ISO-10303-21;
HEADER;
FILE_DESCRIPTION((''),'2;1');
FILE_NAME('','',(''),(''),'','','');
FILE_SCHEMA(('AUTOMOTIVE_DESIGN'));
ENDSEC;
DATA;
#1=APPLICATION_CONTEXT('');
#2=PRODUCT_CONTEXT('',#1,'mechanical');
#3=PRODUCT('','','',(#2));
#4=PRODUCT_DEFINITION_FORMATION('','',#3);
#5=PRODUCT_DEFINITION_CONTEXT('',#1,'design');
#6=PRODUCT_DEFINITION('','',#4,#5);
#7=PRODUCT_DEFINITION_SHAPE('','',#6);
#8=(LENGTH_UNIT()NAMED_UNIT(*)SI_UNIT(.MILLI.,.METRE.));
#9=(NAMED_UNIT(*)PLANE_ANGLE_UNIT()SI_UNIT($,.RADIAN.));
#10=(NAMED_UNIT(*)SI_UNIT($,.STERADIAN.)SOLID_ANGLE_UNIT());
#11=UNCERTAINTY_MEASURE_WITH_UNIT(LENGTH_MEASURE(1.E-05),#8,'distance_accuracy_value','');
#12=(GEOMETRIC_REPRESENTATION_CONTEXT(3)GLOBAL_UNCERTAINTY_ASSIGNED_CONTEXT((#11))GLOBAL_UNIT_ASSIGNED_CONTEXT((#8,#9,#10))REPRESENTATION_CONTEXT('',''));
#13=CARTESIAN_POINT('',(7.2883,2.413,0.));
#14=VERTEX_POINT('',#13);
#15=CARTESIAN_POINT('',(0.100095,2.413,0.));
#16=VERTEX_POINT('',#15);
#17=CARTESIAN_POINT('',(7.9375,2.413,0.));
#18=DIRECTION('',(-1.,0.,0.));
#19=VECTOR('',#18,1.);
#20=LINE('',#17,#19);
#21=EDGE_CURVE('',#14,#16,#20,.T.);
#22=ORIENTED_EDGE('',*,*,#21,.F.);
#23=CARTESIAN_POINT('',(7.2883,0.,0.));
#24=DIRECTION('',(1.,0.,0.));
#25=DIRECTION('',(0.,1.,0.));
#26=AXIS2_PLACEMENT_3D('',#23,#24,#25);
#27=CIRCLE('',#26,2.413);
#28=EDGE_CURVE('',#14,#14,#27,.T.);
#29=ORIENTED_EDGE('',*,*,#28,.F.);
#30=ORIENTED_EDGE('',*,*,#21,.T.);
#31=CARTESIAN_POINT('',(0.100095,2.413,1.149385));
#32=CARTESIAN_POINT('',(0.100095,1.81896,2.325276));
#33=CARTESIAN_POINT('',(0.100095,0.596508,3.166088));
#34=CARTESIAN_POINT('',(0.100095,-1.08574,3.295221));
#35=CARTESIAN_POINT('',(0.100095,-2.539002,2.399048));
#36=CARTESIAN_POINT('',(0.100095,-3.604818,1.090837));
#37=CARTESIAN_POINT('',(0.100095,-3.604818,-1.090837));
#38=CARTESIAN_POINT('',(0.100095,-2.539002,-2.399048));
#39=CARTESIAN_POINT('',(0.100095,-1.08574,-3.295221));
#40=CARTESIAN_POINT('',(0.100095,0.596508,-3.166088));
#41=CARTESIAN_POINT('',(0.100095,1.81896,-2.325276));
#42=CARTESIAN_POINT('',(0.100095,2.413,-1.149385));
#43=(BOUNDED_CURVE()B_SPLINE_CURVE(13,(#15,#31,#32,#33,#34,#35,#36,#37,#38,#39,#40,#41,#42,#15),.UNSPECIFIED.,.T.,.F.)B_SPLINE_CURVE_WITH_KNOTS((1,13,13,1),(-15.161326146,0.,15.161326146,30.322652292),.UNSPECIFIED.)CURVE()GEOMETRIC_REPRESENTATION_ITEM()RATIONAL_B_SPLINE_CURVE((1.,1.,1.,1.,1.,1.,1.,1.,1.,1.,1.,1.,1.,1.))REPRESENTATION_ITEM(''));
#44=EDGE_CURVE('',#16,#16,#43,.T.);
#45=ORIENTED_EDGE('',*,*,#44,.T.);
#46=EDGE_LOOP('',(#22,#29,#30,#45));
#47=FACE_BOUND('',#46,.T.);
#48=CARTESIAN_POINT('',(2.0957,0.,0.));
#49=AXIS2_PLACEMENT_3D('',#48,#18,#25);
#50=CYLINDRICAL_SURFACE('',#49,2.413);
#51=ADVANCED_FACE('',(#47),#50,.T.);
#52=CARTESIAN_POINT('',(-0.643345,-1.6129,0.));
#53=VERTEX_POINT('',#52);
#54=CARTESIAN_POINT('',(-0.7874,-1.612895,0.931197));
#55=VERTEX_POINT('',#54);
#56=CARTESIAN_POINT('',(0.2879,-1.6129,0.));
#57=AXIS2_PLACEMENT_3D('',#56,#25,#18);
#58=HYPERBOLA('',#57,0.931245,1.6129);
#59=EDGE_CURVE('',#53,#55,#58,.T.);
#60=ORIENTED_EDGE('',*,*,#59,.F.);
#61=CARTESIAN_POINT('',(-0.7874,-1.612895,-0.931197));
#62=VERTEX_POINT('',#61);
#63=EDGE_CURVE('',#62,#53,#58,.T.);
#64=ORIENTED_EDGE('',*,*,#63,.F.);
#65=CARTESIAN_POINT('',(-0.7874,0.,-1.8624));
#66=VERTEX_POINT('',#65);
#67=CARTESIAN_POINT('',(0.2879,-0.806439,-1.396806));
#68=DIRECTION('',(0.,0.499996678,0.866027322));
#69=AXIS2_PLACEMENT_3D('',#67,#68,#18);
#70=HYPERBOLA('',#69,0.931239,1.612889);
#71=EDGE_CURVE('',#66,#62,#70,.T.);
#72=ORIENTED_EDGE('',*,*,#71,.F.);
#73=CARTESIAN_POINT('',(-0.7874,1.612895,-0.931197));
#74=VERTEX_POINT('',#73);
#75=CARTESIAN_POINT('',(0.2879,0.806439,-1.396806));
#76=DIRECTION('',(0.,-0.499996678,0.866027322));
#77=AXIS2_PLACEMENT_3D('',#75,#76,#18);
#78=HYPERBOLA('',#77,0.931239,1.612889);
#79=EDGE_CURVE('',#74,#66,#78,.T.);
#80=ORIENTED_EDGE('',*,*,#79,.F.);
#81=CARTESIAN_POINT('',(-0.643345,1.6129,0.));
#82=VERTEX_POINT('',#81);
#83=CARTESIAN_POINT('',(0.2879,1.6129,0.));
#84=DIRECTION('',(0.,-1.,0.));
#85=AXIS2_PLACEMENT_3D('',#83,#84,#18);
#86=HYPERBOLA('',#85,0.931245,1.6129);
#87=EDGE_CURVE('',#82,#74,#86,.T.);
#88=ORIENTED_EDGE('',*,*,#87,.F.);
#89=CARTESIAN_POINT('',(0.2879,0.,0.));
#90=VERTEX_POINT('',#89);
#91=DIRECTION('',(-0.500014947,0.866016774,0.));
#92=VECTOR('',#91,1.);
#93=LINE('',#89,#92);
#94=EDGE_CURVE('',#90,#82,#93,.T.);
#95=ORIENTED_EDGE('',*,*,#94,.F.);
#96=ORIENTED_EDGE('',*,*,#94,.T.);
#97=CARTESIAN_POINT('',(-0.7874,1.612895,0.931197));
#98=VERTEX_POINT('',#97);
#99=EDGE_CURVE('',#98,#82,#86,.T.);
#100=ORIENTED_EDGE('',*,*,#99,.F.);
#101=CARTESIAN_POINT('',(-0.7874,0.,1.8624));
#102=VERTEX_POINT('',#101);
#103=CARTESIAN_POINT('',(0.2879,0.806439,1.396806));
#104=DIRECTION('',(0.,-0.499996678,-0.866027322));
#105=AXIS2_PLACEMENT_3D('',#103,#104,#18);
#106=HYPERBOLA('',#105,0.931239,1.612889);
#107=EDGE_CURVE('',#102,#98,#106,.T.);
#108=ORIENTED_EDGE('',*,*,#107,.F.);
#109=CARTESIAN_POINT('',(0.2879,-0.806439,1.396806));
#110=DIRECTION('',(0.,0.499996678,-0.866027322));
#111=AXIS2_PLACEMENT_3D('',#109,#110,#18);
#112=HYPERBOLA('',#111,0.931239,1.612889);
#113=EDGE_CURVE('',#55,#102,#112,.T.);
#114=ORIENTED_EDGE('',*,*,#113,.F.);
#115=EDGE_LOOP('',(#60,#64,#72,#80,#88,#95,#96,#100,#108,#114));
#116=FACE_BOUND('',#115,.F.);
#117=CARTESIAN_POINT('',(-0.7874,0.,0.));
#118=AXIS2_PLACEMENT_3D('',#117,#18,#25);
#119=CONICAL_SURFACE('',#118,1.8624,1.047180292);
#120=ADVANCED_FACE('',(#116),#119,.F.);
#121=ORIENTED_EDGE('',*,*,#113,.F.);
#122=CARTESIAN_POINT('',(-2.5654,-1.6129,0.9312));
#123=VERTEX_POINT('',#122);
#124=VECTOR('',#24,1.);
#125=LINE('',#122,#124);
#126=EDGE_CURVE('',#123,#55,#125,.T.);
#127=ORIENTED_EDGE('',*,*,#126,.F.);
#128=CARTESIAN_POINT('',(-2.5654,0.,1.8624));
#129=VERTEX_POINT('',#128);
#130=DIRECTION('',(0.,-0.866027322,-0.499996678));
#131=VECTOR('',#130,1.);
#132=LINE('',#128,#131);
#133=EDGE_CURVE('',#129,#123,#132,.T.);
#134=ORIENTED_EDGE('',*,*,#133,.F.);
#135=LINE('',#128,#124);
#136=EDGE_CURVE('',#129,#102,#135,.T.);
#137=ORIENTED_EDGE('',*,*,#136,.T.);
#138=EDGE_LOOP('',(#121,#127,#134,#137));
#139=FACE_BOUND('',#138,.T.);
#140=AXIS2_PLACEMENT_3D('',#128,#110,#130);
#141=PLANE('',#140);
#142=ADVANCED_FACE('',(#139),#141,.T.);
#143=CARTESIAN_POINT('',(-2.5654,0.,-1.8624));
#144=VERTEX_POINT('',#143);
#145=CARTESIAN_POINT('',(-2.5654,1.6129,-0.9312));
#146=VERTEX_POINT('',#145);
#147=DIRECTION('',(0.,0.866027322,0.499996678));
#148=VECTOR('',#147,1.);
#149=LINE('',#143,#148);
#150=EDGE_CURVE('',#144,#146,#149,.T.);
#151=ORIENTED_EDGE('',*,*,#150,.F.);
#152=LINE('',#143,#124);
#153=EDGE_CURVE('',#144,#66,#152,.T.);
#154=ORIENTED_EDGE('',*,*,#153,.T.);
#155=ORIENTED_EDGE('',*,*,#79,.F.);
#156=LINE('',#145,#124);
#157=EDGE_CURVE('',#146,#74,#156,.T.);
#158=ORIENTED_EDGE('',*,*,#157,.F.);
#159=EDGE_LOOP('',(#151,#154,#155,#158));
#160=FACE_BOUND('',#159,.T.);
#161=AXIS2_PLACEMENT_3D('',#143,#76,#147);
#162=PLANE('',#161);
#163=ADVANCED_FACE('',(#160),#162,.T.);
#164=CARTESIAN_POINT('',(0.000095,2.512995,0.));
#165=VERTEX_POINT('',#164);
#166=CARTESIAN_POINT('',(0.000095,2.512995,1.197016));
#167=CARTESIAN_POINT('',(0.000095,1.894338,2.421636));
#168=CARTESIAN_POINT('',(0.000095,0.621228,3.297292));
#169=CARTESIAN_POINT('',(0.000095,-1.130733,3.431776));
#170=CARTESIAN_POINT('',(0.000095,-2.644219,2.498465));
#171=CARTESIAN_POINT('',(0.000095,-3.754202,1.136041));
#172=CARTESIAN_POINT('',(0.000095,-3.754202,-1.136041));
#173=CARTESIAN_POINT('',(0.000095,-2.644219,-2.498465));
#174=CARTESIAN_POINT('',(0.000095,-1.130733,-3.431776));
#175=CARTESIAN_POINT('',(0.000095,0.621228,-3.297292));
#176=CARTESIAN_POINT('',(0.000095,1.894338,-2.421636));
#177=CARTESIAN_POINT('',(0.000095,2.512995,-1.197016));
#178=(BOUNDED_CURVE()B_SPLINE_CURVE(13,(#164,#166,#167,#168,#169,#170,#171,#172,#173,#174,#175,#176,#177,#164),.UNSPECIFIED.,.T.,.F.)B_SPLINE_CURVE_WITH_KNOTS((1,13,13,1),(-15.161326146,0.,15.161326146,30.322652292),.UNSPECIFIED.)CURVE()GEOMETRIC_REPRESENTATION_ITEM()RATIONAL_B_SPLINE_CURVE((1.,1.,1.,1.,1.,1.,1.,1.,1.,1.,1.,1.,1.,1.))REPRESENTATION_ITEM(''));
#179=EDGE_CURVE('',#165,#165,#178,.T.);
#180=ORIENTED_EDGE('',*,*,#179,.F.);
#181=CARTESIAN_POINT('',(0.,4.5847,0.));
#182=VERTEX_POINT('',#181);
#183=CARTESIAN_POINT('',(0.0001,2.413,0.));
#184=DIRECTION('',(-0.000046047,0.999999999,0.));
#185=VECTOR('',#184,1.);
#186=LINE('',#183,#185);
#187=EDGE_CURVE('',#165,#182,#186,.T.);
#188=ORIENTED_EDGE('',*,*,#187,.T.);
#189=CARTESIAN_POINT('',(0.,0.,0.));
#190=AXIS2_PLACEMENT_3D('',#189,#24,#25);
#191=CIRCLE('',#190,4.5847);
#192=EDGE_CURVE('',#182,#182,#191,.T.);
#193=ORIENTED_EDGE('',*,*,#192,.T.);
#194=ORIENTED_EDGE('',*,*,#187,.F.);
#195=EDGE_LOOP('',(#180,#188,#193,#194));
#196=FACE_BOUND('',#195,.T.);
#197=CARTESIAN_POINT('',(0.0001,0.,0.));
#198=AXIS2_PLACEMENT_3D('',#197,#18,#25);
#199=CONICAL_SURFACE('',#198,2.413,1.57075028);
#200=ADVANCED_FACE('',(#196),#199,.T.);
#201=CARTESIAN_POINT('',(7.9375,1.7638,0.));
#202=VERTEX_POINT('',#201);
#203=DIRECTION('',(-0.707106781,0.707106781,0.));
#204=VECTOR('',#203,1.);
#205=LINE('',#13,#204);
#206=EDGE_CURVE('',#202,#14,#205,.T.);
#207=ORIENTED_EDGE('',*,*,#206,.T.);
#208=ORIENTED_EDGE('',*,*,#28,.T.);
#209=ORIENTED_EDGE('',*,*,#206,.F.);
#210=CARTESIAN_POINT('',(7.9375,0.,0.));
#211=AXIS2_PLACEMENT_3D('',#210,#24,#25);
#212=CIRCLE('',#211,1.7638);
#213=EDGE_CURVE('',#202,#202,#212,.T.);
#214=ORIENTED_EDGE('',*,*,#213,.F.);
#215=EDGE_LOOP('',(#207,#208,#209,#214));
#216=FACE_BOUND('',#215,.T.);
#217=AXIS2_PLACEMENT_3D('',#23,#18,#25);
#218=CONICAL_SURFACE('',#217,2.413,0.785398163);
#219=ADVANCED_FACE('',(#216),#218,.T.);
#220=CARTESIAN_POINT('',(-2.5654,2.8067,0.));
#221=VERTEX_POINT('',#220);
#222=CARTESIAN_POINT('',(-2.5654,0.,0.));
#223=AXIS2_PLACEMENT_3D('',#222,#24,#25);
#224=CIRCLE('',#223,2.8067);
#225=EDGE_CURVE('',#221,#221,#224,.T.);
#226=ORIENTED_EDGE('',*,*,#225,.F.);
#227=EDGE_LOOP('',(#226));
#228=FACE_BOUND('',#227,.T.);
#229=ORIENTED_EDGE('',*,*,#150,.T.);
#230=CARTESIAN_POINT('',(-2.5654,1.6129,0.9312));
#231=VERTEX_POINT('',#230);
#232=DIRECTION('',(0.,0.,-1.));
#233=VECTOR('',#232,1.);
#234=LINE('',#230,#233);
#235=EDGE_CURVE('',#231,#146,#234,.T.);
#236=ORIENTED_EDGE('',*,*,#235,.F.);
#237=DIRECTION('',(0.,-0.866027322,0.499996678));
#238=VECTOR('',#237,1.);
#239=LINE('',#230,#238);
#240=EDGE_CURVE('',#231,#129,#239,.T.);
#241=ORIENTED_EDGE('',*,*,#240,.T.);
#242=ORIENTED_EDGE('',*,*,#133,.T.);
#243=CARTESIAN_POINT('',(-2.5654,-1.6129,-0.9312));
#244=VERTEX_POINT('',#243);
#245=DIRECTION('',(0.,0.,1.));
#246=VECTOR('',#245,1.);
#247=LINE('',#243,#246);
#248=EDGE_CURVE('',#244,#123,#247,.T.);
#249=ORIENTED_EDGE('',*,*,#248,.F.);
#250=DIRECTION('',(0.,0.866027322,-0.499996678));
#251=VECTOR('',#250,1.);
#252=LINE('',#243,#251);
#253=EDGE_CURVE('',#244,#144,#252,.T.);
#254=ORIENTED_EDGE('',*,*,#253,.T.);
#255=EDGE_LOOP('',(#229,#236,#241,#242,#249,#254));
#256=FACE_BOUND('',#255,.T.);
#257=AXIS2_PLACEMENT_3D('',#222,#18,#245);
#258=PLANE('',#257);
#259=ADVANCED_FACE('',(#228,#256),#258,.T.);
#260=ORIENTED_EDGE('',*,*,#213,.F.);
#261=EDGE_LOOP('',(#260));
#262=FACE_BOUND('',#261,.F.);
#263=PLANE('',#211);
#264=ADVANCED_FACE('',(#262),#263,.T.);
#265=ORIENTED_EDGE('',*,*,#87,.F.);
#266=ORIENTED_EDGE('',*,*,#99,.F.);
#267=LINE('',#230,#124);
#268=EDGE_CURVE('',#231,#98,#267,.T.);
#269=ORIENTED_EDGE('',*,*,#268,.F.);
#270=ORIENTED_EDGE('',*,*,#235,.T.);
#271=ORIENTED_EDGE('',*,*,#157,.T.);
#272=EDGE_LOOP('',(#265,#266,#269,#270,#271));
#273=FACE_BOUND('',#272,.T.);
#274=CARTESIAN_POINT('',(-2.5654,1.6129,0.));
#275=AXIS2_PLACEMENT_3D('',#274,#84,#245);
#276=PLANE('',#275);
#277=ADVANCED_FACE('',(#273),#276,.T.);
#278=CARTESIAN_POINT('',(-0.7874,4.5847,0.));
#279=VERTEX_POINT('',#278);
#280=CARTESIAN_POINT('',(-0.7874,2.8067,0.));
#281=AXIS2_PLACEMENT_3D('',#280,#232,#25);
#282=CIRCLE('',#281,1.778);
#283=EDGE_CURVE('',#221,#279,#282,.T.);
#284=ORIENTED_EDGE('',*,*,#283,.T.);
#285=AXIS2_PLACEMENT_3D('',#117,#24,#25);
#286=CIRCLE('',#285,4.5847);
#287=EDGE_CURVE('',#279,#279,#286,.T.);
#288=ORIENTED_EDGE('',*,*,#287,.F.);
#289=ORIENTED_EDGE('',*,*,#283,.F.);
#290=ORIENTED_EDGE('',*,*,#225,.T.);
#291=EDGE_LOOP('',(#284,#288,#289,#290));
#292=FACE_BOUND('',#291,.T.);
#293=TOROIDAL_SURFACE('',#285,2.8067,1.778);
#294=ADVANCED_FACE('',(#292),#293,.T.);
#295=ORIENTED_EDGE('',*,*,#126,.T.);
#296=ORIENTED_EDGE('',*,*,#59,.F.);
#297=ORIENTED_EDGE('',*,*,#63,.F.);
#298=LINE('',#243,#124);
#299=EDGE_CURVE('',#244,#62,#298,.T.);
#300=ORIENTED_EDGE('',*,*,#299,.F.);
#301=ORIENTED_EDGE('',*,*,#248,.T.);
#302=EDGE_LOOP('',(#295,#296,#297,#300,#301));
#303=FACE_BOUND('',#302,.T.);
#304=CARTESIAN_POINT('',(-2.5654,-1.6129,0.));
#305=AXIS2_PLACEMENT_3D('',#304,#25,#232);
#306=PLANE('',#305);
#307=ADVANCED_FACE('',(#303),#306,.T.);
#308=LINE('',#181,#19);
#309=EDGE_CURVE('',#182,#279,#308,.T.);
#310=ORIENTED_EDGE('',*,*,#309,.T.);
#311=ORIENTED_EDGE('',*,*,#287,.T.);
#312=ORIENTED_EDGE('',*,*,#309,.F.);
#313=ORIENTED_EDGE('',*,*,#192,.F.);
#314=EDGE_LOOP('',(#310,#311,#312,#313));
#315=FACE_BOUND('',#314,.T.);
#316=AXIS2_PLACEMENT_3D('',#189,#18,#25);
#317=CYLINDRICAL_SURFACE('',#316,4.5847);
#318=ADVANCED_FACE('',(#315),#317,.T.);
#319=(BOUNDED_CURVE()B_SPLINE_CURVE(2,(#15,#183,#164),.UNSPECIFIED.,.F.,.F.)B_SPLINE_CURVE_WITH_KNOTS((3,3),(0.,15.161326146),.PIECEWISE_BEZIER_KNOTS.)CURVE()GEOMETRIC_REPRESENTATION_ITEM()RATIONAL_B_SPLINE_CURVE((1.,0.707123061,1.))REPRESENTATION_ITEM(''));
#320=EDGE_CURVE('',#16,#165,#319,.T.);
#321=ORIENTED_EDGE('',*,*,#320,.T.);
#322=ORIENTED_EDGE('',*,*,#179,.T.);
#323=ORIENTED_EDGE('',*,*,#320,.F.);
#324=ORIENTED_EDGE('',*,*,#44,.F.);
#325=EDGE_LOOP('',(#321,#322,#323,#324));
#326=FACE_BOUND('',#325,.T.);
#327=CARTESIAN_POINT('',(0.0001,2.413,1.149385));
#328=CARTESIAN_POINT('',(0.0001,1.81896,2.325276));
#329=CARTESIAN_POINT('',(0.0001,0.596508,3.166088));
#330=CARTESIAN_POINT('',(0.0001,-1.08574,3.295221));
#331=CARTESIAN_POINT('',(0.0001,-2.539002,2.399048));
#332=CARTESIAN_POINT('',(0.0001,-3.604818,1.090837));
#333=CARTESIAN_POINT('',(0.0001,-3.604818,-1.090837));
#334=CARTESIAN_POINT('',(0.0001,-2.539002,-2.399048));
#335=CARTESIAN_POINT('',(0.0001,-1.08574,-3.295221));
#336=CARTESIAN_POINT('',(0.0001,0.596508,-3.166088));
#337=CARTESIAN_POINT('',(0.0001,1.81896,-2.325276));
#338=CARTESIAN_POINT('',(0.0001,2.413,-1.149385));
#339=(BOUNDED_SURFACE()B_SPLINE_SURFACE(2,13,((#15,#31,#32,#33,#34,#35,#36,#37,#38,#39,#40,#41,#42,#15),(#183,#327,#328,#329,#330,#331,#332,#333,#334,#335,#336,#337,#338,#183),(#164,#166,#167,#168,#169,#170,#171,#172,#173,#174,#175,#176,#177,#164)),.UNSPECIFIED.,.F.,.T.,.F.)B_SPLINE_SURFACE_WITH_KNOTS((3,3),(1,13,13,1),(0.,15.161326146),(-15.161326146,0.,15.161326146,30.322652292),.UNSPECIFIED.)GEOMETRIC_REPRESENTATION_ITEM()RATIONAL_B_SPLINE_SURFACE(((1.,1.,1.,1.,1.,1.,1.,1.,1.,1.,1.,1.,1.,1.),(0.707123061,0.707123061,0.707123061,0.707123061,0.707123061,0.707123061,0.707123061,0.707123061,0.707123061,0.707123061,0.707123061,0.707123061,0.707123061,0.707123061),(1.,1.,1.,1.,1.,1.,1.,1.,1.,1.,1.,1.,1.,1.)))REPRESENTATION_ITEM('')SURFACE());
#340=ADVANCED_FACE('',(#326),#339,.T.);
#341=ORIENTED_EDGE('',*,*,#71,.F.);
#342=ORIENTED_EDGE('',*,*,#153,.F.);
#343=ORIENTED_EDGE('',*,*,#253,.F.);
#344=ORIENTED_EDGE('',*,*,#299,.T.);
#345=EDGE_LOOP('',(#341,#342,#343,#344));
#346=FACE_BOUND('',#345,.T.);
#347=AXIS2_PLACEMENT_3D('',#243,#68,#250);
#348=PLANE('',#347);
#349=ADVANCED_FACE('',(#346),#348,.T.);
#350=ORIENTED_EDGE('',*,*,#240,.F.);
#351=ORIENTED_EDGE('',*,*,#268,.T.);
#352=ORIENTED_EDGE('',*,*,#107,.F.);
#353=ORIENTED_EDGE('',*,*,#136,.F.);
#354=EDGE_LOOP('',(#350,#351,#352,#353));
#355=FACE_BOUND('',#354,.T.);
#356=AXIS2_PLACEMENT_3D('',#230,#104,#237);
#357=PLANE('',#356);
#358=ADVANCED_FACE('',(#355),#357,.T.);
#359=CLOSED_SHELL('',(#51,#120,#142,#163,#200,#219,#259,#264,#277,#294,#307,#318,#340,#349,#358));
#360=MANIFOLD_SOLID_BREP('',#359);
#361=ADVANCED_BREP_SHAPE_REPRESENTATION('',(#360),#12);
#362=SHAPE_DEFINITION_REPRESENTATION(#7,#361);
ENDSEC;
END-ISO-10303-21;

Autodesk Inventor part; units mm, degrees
ref_plane "YZ Plane" through (0, 0, 0) normal (1, 0, 0) x (0, 1, 0)
ref_plane "XZ Plane" through (0, 0, 0) normal (0, 1, 0) x (-1, 0, 0)
sketch "Sketch1" plane through (0, 0, 0) normal (0, 0, 1) x (1, 0, 0)
  line L0 (0.2879, 0) -> (7.9375, 0)
  line L1 (7.9375, 0) -> (7.9375, 2.413)
  line L2 (7.9375, 2.413) -> (2.0957, 2.413)
  line L3 (2.0957, 2.413) -> (0.0001, 2.413)
  line L4 (0.0001, 2.413) -> (0, 2.413)
  line L5 (0, 2.413) -> (0, 4.5847)
  line L6 (0, 4.5847) -> (-2.5654, 4.5847)
  line L7 (-2.5654, 4.5847) -> (-2.5654, 1.8624)
  line L8 (-2.5654, 1.8624) -> (-0.7874, 1.8624)
  line L9 (-0.7874, 1.8624) -> (0.2879, 0)
  line L10 (-4.666, 0) -> (10.0381, 0) projected
  line L11 (0, -0.9169) -> (0, 5.5016) projected
  line L12 (2.0957, 2.413) -> (0, 2.413) construction
  dimension "d1" = 5.8418
  dimension "d2" = 2.0956
  dimension "d3" = 2.5654
  dimension "d4" = 1.778
  dimension "d5" = 60
  dimension "d6" = 4.826
  dimension "d7" = 4.826
  dimension "d8" = 3.7248
  dimension "d9" = 9.1694
  dimension "d26" = 7.9375
revolve "Body" add sketch "Sketch1" angle 360 about axis through (0.2879, 0, 0) along (1, 0, 0) contours L9 L11 L3 L2 L1 L0 | L9 L8 L7 L6 L5 L11
sketch "Sketch2" plane through (-2.5654, 0, 0) normal (-1, 0, 0) x (0, 0, 1)
  circle A0 centre (0, 0) radius 1.8624 projected
  line L0 (0, -6.4186) -> (0, 6.4186) projected
  line L1 (-6.4186, 0) -> (6.4186, 0) projected
  line L2 (1.8624, 0) -> (0.9312, -1.6129)
  line L3 (0.9312, -1.6129) -> (-0.9312, -1.6129)
  line L4 (-0.9312, -1.6129) -> (-1.8624, 0)
  line L5 (-1.8624, 0) -> (-0.9312, 1.6129)
  line L6 (-0.9312, 1.6129) -> (0.9312, 1.6129)
  line L7 (0.9312, 1.6129) -> (1.8624, 0)
  point P0 (0, 0)
extrude "Slot" add sketch "Sketch2" against normal up to next contours L7 A0 | A0 L2 | L6 L0 A0 | A0 L0 L3 | L0 L6 A0 | A0 L3 L0 | L4 A0 | A0 L5
fillet "Fillet1" radius 1.778 1 edges at (-2.5654, -4.5847, 0)
thread "Thread" size "10-24 UNC" class "2A" standard "ANSI Unified Screw Threads" length 5.8418
chamfer "Chamfer1" distance 0.6492 distance2 0.6492 1 edges at (7.9375, -2.413, 0) measured on face at (7.9375, -0.2686, 0.7084)
ref_plane "Work Plane1" through (29, 0, 0) normal (0, -1, 0) x (1, 0, 0)
fillet "Fillet2" radius 0.1 1 edges at (0.0001, -2.413, 0)
equation "\"d30\" = R"
equation "\"d17\" = RR"
equation "\"d13\" = GEL"
equation "\"d15\" = -0.5 * SPD + 0.5 * GD"
equation "\"d16\" = GUL"
equation "\"d1\" = GEL"
equation "\"d3\" = KOH"
equation "\"d4\" = INTI"
equation "\"d6\" = GD"
equation "\"d7\" = BDM"
equation "\"d8\" = 1.1547 * SW"
equation "\"d9\" = KOD"
equation "\"d26\" = NLG"
equation "\"GD\" = NND"
equation "\"NLG\" = 7.9375"
equation "\"GEL\" = 5.8418"
equation "\"KOD\" = 9.1694"
equation "\"KOH\" = 2.5654"
equation "\"INTI\" = 1.778"
equation "\"GAL\" = 2.0955"
equation "\"GUL\" = 0.64922"
equation "\"BDM\" = NND"
equation "\"SW\" = 3.2258"
equation "\"RR\" = 1.778"
equation "\"SPD\" = GD1"
equation "\"R\" = 0.1"
equation "\"KR\" = 5.4102"
equation "\"GD1\" = 3.52755"
equation "\"THREADDIA\" = 4.826"
equation "\"FAWI\" = 45deg"
equation "\"KOH1\" = 1.778"
equation "\"NND\" = 4.826"
equation "\"TOA\" = 30deg"
equation "\"E0\" = 1.155 * SW"
properties part number "Unbrako - 10 x 5/16" material "Steel, Mild"
